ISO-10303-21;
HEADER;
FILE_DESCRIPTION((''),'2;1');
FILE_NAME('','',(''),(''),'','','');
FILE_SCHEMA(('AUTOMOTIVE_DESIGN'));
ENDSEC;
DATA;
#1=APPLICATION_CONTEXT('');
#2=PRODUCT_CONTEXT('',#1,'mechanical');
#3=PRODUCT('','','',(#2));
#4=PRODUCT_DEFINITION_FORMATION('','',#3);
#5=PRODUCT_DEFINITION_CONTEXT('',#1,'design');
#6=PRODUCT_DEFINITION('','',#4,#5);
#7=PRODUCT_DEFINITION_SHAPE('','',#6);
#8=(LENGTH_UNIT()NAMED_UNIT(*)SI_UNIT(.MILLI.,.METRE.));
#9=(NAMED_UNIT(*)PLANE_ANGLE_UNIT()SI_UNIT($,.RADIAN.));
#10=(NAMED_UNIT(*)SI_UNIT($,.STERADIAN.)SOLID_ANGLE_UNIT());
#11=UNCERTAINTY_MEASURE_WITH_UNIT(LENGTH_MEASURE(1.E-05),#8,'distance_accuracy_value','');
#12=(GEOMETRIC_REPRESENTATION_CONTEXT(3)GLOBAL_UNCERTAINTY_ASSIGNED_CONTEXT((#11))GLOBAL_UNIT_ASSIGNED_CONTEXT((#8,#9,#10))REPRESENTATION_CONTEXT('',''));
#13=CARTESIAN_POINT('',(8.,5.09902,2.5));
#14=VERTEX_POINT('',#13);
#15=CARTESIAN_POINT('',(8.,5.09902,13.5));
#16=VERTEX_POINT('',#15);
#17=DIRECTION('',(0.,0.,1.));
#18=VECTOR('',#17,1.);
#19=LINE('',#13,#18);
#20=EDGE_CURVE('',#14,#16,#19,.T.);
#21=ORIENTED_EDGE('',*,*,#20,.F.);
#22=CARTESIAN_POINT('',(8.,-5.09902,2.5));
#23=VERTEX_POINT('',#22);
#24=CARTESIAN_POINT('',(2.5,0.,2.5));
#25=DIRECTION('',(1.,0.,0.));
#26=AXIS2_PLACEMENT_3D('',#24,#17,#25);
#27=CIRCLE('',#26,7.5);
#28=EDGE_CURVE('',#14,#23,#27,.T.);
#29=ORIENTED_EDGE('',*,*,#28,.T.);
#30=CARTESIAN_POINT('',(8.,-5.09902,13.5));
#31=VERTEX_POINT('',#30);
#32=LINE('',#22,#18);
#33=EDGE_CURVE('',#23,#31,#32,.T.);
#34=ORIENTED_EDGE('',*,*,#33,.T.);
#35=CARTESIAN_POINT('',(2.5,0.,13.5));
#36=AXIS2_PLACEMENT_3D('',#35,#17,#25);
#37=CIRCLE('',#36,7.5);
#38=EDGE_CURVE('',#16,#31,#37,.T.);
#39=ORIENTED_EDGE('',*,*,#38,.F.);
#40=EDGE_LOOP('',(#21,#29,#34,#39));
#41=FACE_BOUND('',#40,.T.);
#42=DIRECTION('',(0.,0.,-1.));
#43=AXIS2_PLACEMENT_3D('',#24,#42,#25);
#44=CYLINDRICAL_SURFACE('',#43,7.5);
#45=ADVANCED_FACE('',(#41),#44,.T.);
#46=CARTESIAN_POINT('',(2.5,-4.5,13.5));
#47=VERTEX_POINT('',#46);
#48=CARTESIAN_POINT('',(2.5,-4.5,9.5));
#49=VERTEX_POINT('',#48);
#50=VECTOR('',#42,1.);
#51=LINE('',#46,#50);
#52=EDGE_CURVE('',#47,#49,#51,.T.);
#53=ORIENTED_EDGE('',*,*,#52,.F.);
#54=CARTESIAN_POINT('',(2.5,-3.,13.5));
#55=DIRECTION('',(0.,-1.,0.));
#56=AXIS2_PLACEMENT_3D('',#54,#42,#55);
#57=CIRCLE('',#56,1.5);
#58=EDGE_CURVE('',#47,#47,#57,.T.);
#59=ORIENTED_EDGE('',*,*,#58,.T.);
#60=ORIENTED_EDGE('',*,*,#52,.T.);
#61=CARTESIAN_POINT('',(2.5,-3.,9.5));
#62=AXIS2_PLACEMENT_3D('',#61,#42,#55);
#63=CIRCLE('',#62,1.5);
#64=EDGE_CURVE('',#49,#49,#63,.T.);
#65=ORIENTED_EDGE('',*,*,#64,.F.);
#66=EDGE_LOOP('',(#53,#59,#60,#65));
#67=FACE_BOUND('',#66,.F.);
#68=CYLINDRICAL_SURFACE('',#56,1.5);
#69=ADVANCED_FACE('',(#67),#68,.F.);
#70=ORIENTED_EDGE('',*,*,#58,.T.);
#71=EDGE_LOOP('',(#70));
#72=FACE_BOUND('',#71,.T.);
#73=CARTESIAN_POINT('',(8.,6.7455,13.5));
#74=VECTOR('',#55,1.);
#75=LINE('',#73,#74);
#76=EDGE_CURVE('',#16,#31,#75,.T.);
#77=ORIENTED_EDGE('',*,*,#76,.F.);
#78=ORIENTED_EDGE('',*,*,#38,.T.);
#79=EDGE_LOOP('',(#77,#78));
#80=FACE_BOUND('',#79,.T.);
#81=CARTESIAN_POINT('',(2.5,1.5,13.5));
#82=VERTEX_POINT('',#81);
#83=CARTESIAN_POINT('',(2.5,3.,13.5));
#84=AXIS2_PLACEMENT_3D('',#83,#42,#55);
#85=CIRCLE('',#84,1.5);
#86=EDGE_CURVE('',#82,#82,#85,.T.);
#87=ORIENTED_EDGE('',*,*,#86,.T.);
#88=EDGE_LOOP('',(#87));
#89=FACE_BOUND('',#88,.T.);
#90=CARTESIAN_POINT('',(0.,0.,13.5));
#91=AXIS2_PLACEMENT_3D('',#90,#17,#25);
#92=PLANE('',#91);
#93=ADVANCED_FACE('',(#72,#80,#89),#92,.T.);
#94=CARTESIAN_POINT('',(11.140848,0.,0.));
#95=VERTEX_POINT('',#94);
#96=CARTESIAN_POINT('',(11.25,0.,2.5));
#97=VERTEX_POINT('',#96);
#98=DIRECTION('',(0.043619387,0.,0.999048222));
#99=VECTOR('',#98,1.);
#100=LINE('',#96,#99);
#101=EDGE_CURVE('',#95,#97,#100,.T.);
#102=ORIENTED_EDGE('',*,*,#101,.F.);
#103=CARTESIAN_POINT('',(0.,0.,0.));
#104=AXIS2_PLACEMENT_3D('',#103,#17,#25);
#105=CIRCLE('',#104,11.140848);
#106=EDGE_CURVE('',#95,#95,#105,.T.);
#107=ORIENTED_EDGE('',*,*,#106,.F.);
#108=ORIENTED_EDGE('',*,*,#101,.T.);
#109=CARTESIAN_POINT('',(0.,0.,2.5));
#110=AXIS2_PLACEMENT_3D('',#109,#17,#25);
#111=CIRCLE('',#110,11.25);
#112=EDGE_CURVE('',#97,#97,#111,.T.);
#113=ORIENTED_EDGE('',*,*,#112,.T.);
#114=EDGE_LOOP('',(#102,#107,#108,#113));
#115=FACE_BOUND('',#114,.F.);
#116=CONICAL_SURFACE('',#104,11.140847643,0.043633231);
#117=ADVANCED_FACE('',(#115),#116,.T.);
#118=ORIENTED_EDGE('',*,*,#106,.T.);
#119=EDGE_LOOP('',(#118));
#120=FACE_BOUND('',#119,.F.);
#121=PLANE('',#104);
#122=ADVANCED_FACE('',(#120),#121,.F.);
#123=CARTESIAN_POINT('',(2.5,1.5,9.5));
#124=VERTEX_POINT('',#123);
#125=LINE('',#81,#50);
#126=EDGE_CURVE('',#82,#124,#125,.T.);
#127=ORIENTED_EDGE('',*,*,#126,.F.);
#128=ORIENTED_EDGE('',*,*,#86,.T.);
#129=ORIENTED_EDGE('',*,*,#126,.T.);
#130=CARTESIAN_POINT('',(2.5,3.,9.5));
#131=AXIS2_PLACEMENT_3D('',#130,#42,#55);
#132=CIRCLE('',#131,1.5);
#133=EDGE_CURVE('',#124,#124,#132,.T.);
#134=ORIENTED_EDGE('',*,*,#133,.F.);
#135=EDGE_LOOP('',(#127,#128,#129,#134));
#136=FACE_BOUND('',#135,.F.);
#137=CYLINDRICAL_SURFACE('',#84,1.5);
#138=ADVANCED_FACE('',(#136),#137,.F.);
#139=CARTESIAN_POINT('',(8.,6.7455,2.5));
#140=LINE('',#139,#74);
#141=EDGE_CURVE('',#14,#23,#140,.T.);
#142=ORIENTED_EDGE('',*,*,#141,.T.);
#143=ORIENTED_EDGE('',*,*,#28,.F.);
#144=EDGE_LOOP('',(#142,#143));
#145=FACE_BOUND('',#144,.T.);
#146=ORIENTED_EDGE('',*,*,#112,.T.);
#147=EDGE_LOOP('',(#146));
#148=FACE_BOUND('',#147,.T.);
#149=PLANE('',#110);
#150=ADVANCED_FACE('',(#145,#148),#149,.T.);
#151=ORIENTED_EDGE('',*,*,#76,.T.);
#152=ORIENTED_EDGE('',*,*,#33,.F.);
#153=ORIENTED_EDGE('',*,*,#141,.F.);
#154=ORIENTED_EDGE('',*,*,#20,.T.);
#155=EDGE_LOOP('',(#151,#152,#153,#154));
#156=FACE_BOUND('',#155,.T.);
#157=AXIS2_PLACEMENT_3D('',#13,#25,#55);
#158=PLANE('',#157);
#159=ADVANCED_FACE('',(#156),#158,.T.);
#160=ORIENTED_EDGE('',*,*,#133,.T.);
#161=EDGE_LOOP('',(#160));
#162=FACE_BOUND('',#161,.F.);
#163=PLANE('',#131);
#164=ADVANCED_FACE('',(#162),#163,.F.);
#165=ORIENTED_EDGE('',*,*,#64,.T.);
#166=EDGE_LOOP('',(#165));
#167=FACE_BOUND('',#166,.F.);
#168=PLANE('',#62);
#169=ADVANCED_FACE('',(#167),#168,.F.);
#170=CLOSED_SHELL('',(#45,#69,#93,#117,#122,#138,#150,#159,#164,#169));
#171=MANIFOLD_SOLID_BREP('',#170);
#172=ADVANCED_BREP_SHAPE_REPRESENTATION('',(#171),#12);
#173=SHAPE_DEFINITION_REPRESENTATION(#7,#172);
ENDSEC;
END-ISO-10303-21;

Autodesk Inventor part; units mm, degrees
ref_plane "YZ Plane" through (0, 0, 0) normal (1, 0, 0) x (0, 1, 0)
ref_plane "XZ Plane" through (0, 0, 0) normal (0, 1, 0) x (-1, 0, 0)
sketch "Sketch1" plane through (0, 0, 0) normal (0, 0, 1) x (1, 0, 0)
  circle A0 centre (0, 0) radius 11.25
  line L0 (0, 0) -> (2.5, 0)
  circle A1 centre (2.5, 0) radius 7.5
  line L1 (8, 6.7455) -> (8, -7.7933)
  point P0 (10, 0)
  point P1 (10, 0)
  point P2 (8, -5.099)
  point P3 (8, 5.099)
  dimension "d2" = 15
  dimension "d0" = 22.5
  dimension "d1" = 2.5
  dimension "d3" = 2
extrude "Extrusion1" add sketch "Sketch1" along normal blind 2.5 contours A0 | A1 L1 | L1 A1
extrude "Extrusion2" add sketch "Sketch1" along normal blind 11 from surface at 2.5 contours L1 A1 picked at (-0.3888, 1.1518)
sketch "Sketch2" plane through (2.5, 0, 13.5) normal (0, 0, 1) x (1, 0, 0)
  line L0 (0, 0) -> (0, 3)
  circle A0 centre (0, 3) radius 2.75
  line L1 (-18.25, 0) -> (13.25, 0) construction
  circle A1 centre (0, -3) radius 2.75
  point P0 (-2.5, 0)
  dimension "d8" = 3
  dimension "d23" = 5.5
hole "Hole1" at (2.5, 3, 13.5) at (2.5, -3, 13.5) direction (0, 0, -1) diameter 3 depth 4
draft "FaceDraft1" angle 2.5 pull direction (0, 0, -1) faces at (11.1043, -1.8046, 1.6667) fixed edges at (-11.25, 0, 2.5)
sketch "Sketch3" plane through (0, 0, 20) normal (0, 0, 1) x (1, 0, 0)
  arc A0 (5.5, 4) -> (5.5, -4) centre (2.5, 0) ccw projected
  circle A1 centre (2.5, 2) radius 1.5 projected
  circle A2 centre (2.5, -1.8526) radius 1.5 projected
  line L0 (2.5, 5) -> (27.5, 5)
  line L1 (2.5, -5) -> (27.5, -5)
  line L2 (27.5, -5) -> (27.5, 5)
  point P0 (0, 0)
  dimension "d18" = 25
  dimension "d19" = 25
